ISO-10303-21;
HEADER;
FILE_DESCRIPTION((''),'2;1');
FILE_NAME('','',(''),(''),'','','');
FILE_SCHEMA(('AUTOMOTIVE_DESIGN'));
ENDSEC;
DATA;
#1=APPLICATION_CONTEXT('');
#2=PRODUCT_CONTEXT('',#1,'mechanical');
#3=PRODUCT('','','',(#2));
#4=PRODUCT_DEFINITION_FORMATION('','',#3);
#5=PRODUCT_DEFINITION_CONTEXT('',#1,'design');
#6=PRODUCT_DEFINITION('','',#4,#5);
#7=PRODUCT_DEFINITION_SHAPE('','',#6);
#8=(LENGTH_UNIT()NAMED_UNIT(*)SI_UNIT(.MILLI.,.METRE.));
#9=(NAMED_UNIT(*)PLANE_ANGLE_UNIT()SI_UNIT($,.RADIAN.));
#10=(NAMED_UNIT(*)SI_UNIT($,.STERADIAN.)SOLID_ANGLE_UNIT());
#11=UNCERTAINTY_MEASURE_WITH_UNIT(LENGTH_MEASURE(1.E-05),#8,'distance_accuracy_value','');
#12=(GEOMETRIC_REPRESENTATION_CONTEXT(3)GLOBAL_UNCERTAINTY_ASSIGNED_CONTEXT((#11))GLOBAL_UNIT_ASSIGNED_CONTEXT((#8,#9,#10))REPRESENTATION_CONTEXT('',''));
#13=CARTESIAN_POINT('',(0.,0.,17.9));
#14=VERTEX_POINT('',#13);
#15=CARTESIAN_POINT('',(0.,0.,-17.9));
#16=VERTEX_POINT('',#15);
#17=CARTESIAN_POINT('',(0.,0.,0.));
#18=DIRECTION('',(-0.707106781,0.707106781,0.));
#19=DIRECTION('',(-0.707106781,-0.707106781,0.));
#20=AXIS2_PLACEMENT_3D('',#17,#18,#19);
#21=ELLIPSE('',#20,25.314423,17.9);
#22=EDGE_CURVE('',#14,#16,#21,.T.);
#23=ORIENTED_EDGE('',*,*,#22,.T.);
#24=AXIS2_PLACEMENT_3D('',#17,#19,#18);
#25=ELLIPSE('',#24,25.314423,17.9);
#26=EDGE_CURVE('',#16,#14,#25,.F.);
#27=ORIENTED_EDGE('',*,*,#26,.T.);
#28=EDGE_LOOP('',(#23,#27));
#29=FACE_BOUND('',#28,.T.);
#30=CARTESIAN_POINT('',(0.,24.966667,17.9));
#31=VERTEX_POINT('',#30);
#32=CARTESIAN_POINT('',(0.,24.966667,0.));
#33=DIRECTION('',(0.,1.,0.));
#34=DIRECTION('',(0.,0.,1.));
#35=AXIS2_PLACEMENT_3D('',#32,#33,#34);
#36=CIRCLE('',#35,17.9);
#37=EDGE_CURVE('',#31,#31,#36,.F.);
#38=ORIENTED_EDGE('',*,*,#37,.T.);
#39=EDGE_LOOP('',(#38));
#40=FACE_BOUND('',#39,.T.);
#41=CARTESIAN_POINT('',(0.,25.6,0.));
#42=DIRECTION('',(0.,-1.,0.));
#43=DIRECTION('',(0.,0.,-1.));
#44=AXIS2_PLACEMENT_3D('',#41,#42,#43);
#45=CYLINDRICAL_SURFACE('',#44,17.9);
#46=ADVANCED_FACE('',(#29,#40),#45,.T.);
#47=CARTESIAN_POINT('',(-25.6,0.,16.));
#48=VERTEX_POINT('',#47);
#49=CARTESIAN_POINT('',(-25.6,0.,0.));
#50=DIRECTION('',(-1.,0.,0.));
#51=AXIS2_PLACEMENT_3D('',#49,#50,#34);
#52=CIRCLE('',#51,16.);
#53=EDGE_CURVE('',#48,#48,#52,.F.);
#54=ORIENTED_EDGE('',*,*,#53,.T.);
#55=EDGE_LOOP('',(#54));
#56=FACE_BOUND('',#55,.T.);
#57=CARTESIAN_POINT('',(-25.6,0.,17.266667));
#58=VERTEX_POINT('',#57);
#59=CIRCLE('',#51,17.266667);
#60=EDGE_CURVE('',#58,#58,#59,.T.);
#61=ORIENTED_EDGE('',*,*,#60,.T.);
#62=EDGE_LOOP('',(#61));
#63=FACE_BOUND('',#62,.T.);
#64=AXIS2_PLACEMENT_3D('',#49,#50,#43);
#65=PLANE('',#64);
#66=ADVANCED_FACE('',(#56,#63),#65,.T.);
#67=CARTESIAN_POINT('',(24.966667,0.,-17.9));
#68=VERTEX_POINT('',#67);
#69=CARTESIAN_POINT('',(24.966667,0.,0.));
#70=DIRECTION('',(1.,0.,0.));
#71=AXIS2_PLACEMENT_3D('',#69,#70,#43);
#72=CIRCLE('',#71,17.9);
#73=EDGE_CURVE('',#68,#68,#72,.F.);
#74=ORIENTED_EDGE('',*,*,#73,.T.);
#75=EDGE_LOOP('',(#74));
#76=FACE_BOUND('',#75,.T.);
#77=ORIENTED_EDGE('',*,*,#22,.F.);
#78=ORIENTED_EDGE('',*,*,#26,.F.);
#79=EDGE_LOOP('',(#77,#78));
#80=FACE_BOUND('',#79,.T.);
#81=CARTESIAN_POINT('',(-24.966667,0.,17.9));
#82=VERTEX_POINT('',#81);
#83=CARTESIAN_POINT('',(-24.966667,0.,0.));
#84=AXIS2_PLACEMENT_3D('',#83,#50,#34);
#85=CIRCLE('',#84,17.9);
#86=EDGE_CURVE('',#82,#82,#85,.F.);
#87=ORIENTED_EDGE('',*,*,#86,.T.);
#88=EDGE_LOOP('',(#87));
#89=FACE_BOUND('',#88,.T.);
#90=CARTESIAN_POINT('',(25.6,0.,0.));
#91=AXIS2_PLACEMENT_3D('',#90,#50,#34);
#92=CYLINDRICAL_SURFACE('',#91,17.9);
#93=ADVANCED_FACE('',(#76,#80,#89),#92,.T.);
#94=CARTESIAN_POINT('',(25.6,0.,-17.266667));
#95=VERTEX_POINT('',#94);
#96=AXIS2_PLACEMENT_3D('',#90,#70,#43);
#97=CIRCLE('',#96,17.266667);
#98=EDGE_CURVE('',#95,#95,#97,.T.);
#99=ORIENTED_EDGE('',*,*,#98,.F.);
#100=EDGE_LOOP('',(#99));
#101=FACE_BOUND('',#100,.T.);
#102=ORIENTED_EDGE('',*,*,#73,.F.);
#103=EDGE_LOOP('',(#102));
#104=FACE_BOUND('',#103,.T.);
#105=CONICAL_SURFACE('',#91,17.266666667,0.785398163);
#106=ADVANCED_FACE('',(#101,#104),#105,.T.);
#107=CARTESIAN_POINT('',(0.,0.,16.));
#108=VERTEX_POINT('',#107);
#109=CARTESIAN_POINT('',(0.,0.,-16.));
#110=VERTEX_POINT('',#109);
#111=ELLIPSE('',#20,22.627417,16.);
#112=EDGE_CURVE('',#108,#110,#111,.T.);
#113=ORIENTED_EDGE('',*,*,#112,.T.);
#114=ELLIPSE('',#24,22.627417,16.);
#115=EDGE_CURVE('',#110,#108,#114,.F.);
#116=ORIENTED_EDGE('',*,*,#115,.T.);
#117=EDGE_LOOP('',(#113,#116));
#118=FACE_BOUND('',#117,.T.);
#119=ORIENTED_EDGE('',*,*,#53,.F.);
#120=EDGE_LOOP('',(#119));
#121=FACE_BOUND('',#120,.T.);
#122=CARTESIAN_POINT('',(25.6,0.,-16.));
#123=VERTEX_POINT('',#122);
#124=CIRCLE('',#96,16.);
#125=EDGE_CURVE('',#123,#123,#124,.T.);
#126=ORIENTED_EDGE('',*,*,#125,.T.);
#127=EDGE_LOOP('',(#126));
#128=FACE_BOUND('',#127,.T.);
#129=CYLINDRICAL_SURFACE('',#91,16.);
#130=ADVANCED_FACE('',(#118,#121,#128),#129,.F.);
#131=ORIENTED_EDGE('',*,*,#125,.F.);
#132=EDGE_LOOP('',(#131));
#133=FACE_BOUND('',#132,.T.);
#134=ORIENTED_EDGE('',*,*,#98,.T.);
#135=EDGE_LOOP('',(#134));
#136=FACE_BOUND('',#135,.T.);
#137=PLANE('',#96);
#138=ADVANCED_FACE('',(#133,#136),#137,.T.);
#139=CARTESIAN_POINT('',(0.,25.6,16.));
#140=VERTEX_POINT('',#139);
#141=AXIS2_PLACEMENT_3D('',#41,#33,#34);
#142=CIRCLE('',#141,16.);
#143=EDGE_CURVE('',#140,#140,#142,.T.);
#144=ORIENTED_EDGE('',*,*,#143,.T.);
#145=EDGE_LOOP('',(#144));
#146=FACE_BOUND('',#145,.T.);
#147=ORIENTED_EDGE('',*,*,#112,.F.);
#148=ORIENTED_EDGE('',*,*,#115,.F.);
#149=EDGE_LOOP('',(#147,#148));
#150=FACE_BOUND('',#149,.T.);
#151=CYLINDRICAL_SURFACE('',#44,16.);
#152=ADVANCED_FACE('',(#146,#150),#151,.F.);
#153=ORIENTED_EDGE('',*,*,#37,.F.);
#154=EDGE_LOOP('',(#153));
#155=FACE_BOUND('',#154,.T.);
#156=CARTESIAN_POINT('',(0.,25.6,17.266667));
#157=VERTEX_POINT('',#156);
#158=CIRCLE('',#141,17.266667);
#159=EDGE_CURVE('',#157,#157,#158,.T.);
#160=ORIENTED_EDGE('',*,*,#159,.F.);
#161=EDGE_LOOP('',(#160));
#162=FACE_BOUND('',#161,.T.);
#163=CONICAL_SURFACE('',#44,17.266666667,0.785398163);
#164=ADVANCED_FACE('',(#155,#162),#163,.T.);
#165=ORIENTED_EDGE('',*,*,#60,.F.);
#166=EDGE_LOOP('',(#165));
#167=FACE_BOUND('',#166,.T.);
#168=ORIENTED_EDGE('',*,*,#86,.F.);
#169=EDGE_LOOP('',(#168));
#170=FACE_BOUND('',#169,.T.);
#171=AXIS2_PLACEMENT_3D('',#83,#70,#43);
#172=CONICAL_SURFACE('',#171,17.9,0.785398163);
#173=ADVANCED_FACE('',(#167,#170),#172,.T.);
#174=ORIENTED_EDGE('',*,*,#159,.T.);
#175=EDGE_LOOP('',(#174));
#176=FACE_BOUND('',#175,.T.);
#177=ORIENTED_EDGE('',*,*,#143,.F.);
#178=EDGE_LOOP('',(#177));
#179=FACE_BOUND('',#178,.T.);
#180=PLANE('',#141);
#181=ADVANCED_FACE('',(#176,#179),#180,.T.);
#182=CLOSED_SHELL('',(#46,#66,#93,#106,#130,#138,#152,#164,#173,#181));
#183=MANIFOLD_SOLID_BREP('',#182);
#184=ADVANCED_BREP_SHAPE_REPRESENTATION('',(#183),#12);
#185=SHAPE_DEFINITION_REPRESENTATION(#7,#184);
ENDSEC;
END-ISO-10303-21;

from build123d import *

# Parameters (mm, degrees)
RUNROUTE_R           = 17.9
RUNEXTRUDE_DEPTH     = 25.6
OUTLETROUTE_R        = 17.9
OUTLETEXTRUDE_DEPTH  = 25.6
TEESHELL_START       = -25.6
TEESHELL_OUTLINE_R   = 16
TEESHELL_DEPTH       = 51.2
TEESHELL_START_2     = -1e-07
TEESHELL_2_OUTLINE_R = 16
TEESHELL_2_DEPTH     = 25.6000001
TEECHAMFER_SIZE      = 0.633333333


with BuildPart() as part:
    # RunRoute → RunExtrude (new body)
    with BuildSketch(Plane(origin=(0, 0, 0), x_dir=(0, 0, -1), z_dir=(1, 0, 0))):
        Circle(RUNROUTE_R)
    runextrude = extrude(amount=RUNEXTRUDE_DEPTH)

    # RunExtrudeMirror: RunExtrude across plane
    add(runextrude.mirror(Plane(origin=(0, 0, 0), x_dir=(0, 0, 1), z_dir=(1, 0, 0))))

    # OutletRoute → OutletExtrude (add)
    with BuildSketch(Plane(origin=(0, 0, 0), x_dir=(1, 0, 0), z_dir=(0, 1, 0))):
        with Locations(Location((0, 0, 0), (0, 0, 270))):
            Circle(OUTLETROUTE_R)
    extrude(amount=OUTLETEXTRUDE_DEPTH)

    # TeeShell: read off the stored shape, not the designer's step
    # TeeShell outline → TeeShell (cut)
    with BuildSketch(Plane.YZ.offset(TEESHELL_START)):
        Circle(TEESHELL_OUTLINE_R)
    extrude(amount=TEESHELL_DEPTH, mode=Mode.SUBTRACT)

    # TeeShell 2 outline → TeeShell 2 (cut)
    with BuildSketch(Plane(origin=(0, 0, 0), x_dir=(1, 0, 0), z_dir=(0, 1, 0)).offset(TEESHELL_START_2)):
        Circle(TEESHELL_2_OUTLINE_R)
    extrude(amount=TEESHELL_2_DEPTH, mode=Mode.SUBTRACT)

    # TeeChamfer
    # the kernel refuses this chamfer: 0.633333333 mm, written as the material it takes off along each edge
    with BuildSketch(Plane(origin=(25.6, 0, 0), x_dir=(0, 0, -1), z_dir=(0, -1, 0))) as teechamfer_piece_1:
        Polygon((17.9, -TEECHAMFER_SIZE), (17.9 - TEECHAMFER_SIZE, 0), (17.9, 0), align=None)
    revolve(axis=Axis((25.6, 0, 0), (1, 0, 0)), mode=Mode.SUBTRACT)
    with BuildSketch(Plane(origin=(-25.6, 0, 0), x_dir=(0, 0, -1), z_dir=(0, -1, 0))) as teechamfer_piece_2:
        Polygon((17.9, TEECHAMFER_SIZE), (17.9 - TEECHAMFER_SIZE, 0), (17.9, 0), align=None)
    revolve(axis=Axis((-25.6, 0, 0), (1, 0, 0)), mode=Mode.SUBTRACT)
    with BuildSketch(Plane(origin=(0, 25.6, 0), x_dir=(0, 0, 1), z_dir=(-1, 0, 0))) as teechamfer_piece_3:
        Polygon((17.9, -TEECHAMFER_SIZE), (17.9 - TEECHAMFER_SIZE, 0), (17.9, 0), align=None)
    revolve(axis=Axis((0, 25.6, 0), (0, 1, 0)), mode=Mode.SUBTRACT)


solid = part.part
